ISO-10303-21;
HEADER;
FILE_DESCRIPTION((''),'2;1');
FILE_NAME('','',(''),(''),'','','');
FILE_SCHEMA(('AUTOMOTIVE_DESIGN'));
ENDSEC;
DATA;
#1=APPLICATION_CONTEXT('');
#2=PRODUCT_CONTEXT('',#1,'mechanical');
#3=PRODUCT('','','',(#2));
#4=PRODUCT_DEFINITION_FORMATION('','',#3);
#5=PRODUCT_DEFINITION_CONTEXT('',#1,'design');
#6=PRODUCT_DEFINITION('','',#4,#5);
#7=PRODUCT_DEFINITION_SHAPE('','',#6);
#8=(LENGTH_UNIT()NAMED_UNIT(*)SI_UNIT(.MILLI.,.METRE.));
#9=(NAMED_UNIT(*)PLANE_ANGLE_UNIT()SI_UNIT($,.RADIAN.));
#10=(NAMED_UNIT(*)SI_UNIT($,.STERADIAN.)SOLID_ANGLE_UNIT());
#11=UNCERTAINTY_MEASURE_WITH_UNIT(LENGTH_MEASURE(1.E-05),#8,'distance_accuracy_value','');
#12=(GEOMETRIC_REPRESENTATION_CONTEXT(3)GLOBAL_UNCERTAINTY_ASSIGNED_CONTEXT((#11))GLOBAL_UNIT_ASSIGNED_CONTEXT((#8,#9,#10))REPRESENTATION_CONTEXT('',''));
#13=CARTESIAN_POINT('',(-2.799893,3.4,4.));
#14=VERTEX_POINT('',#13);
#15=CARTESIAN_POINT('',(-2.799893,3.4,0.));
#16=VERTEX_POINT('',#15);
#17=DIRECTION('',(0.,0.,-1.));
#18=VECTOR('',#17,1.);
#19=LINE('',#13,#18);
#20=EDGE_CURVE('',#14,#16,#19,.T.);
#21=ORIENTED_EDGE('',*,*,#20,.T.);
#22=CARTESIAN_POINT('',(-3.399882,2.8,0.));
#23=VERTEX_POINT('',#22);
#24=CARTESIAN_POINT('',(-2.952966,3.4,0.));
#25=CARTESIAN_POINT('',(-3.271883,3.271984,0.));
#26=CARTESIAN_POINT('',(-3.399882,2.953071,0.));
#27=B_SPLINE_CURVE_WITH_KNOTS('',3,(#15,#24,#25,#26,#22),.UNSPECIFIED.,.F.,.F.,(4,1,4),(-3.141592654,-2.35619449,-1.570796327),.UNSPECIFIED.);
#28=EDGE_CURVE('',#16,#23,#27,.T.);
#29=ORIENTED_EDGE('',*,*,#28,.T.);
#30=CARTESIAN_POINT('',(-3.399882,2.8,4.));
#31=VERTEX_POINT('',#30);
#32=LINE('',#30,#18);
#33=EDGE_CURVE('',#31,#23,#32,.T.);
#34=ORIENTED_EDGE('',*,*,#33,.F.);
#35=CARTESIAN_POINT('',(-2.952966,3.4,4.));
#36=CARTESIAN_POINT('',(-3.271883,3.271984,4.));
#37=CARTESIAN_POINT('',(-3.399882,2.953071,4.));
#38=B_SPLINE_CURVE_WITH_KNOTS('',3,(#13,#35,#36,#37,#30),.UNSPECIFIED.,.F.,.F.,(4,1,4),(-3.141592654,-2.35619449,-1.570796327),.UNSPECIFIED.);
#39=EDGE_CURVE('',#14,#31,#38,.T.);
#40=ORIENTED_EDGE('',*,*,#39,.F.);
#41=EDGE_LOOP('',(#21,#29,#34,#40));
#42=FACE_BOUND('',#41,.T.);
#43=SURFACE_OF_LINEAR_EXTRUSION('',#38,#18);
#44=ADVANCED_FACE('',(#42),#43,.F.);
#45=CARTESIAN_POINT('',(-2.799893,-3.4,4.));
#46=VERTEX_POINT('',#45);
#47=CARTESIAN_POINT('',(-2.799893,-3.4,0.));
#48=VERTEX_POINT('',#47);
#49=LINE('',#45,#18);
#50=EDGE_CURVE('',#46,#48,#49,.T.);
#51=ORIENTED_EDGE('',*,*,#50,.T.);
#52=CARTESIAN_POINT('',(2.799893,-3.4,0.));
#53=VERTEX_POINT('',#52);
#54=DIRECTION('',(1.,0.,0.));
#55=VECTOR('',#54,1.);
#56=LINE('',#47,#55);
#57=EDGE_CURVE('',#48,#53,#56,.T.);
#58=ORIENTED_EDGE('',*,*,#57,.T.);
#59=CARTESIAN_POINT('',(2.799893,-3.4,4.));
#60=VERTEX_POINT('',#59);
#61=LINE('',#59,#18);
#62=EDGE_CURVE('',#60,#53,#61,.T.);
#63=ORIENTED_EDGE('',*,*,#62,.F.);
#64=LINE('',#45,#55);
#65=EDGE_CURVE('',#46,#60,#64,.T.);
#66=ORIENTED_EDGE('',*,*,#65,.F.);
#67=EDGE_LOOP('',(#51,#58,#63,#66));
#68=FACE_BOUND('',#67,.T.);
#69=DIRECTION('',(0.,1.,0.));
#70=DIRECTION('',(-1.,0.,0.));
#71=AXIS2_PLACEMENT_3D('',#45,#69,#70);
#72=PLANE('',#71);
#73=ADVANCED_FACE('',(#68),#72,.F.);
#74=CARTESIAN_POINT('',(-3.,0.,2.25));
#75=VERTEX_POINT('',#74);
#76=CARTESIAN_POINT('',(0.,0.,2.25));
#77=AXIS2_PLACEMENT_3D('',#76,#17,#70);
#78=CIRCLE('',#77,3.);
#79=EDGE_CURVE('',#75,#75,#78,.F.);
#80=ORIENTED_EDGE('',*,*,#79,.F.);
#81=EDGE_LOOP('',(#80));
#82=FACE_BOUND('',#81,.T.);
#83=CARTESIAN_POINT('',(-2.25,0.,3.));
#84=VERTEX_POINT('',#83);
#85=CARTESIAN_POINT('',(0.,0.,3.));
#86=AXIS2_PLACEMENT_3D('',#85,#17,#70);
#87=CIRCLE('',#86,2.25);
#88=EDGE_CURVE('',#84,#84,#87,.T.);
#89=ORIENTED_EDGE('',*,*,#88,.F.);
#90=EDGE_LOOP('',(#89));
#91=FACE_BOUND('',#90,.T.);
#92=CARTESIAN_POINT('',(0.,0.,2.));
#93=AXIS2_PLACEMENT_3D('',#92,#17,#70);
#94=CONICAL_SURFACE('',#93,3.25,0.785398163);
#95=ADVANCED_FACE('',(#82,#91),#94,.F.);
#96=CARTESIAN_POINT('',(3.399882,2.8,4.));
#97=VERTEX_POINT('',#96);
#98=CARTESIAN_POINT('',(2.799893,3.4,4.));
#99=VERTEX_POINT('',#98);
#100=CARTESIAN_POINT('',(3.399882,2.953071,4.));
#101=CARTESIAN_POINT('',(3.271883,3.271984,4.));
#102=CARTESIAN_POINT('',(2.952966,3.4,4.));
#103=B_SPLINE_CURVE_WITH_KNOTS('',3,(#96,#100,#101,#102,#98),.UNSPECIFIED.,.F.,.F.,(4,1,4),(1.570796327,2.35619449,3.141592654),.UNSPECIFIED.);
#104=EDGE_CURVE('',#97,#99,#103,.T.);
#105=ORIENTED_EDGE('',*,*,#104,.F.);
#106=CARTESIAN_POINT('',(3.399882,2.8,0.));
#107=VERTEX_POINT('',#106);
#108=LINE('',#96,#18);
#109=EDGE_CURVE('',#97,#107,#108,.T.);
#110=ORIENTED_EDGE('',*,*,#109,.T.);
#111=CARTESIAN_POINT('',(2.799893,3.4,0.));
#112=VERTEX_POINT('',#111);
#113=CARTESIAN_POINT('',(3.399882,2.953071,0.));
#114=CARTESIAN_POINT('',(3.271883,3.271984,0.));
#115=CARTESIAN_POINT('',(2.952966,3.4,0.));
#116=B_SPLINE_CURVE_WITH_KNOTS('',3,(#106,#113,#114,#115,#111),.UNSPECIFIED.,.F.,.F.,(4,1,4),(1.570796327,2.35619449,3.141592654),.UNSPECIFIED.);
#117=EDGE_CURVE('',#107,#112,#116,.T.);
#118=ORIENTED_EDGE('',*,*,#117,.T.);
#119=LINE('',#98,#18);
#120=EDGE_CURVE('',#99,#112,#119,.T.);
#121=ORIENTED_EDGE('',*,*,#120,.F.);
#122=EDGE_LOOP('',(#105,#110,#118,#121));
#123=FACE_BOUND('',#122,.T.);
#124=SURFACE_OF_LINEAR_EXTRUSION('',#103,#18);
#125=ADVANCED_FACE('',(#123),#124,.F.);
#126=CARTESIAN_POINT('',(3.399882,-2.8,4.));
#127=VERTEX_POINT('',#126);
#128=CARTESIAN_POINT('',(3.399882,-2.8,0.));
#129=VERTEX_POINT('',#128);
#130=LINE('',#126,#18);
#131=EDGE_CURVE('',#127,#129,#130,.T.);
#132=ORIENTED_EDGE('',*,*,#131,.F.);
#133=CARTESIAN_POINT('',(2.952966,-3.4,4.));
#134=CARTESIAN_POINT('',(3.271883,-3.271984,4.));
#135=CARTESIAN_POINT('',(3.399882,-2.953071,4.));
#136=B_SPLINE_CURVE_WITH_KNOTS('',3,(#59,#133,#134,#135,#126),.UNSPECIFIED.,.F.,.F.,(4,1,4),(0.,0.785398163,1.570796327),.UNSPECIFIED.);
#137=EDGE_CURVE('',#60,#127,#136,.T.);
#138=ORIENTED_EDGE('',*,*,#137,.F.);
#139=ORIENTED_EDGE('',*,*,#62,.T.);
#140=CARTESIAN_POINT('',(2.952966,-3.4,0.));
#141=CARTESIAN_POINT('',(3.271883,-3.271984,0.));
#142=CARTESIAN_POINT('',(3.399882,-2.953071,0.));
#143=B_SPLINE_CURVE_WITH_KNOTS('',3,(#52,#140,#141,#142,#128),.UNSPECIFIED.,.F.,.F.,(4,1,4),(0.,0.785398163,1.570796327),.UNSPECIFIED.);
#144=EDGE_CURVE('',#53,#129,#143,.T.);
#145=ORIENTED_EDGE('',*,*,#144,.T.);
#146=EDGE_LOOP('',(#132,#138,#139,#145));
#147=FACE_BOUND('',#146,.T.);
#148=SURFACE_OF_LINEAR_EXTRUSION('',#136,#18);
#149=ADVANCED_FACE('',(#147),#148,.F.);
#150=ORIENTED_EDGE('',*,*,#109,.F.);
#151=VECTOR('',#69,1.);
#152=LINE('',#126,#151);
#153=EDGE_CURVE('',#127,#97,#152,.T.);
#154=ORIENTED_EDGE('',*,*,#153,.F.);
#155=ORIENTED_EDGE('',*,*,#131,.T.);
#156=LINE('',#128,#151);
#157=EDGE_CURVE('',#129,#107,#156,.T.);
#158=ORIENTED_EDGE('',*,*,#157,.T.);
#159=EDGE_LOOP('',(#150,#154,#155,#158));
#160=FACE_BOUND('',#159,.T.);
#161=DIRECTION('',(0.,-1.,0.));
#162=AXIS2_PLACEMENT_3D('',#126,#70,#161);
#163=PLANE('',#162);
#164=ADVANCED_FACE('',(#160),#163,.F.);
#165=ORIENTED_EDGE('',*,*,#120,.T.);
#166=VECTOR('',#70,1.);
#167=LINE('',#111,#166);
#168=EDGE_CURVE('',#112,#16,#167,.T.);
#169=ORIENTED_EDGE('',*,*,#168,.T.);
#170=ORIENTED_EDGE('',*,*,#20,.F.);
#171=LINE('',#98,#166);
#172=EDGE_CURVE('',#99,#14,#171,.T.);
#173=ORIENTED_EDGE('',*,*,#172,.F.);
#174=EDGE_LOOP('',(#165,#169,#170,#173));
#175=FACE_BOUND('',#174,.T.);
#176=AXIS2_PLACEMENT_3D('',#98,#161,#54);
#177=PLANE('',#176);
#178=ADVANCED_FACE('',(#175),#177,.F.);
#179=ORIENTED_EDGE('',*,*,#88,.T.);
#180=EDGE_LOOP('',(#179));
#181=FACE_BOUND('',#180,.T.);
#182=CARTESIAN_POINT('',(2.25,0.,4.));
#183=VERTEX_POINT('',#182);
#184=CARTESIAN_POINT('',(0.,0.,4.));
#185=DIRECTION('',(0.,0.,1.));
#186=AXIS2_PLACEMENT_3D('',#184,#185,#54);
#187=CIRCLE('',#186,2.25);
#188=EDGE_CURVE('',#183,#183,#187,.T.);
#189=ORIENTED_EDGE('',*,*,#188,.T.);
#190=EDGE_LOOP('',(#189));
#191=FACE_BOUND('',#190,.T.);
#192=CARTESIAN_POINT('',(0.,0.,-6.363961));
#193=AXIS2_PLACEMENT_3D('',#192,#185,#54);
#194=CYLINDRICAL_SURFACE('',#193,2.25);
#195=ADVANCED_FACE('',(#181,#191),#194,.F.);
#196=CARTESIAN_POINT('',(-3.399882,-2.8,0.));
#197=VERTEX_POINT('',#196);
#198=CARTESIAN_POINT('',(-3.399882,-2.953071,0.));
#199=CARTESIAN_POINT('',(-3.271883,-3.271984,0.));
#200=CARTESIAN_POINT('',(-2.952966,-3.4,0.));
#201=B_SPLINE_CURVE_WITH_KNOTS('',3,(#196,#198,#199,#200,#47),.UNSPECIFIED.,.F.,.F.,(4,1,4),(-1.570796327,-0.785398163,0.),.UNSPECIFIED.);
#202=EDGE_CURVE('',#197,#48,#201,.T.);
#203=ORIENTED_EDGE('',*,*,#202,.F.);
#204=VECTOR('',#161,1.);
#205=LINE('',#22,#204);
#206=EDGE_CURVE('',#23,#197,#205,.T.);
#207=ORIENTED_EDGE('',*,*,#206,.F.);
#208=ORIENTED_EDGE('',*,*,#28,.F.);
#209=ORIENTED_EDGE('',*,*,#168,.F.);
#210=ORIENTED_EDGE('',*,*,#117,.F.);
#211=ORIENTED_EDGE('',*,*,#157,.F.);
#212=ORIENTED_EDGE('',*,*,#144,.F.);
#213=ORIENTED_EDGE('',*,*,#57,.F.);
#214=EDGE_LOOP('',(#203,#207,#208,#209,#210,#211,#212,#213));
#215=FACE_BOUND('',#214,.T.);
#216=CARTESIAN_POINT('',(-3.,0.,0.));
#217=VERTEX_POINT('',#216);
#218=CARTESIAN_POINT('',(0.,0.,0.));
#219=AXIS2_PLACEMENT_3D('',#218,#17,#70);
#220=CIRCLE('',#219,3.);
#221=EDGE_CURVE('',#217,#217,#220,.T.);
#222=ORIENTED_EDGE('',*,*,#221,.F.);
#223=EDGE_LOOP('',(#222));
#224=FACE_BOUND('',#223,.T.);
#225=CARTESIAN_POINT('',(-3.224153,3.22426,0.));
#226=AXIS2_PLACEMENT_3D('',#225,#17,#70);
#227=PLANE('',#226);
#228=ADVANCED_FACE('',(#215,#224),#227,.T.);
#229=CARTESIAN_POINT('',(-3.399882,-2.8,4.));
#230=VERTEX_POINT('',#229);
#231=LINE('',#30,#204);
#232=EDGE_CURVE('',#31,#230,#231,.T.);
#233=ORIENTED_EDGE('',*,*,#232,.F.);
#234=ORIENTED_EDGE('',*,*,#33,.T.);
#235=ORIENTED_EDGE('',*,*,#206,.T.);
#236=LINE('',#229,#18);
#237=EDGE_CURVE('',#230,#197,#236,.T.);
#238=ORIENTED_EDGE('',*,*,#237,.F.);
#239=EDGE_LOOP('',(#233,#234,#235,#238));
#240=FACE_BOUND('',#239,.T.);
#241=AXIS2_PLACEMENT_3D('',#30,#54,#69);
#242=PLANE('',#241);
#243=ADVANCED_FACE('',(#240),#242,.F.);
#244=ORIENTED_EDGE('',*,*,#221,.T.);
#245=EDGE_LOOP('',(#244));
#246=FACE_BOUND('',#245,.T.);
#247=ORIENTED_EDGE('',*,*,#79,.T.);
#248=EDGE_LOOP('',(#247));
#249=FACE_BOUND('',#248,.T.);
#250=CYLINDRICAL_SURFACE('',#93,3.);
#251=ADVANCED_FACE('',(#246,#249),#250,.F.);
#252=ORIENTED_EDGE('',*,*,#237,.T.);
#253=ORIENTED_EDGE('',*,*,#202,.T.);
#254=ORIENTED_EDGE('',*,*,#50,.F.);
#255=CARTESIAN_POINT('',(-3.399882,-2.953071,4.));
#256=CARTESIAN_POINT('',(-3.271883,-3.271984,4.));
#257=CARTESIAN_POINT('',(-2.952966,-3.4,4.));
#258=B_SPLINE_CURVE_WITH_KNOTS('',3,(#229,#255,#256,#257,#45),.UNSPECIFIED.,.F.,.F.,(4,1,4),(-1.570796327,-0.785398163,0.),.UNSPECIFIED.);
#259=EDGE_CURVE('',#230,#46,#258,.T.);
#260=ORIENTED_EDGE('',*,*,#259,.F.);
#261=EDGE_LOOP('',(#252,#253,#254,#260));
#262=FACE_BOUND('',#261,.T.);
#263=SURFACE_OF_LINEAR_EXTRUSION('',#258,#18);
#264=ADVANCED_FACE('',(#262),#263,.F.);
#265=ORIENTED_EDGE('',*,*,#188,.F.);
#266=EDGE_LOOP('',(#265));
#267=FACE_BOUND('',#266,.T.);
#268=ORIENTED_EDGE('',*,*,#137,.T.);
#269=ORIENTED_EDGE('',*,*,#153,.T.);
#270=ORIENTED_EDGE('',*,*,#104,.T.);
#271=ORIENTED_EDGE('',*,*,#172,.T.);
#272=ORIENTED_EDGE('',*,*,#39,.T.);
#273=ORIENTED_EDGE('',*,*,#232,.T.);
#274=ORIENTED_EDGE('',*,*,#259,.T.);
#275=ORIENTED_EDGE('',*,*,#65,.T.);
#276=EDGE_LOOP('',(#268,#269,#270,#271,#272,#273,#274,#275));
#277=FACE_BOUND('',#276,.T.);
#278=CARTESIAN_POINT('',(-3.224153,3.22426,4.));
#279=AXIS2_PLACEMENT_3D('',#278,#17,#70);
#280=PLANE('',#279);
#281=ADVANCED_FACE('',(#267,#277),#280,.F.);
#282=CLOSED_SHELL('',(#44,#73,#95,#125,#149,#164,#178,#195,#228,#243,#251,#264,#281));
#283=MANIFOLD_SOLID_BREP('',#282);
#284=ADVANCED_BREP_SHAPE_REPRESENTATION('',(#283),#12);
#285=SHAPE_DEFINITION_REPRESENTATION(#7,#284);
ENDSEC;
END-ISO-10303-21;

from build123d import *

# Parameters (mm, degrees)
BOSS_EXTRUDE1_DEPTH = 4
SKETCH2_R           = 2.25
CUT_EXTRUDE1_DEPTH  = 4
SKETCH3_R           = 3
CUT_EXTRUDE2_DEPTH  = 2
CHAMFER1_SIZE       = 1


with BuildPart() as part:
    # Sketch1 → Boss-Extrude1 (new body)
    with BuildSketch(Plane.XY):
        with BuildLine():
            Line((-3.399881961, 2.8), (-3.399881961, -2.8))
            add(Edge.make_bspline(
                [(-3.399881961, -2.8), (-3.399881961, -2.953071187), (-3.271882834, -3.271984466), (-2.952966029, -3.4), (-2.799893385, -3.4)],
                knots=[-1.570796327, -1.570796327, -1.570796327, -1.570796327, -0.785398163, 0, 0, 0, 0], degree=3))
            Line((-2.799893385, -3.4), (2.799893385, -3.4))
            add(Edge.make_bspline(
                [(2.799893385, -3.4), (2.952966029, -3.4), (3.271882834, -3.271984466), (3.399881961, -2.953071187), (3.399881961, -2.8)],
                knots=[0, 0, 0, 0, 0.785398163, 1.570796327, 1.570796327, 1.570796327, 1.570796327], degree=3))
            Line((3.399881961, -2.8), (3.399881961, 2.8))
            add(Edge.make_bspline(
                [(3.399881961, 2.8), (3.399881961, 2.953071187), (3.271882834, 3.271984466), (2.952966029, 3.4), (2.799893385, 3.4)],
                knots=[1.570796327, 1.570796327, 1.570796327, 1.570796327, 2.35619449, 3.141592654, 3.141592654, 3.141592654, 3.141592654], degree=3))
            Line((2.799893385, 3.4), (-2.799893385, 3.4))
            add(Edge.make_bspline(
                [(-2.799893385, 3.4), (-2.952966029, 3.4), (-3.271882834, 3.271984466), (-3.399881961, 2.953071187), (-3.399881961, 2.8)],
                knots=[-3.141592654, -3.141592654, -3.141592654, -3.141592654, -2.35619449, -1.570796327, -1.570796327, -1.570796327, -1.570796327], degree=3))
        make_face()
    extrude(amount=BOSS_EXTRUDE1_DEPTH)

    # Sketch2 → Cut-Extrude1 (cut)
    with BuildSketch(Plane.XY.offset(4)):
        Circle(SKETCH2_R)
    extrude(amount=-CUT_EXTRUDE1_DEPTH, mode=Mode.SUBTRACT)

    # Sketch3 → Cut-Extrude2 (cut)
    with BuildSketch(Plane(origin=(0, 0, 0), x_dir=(-1, 0, 0), z_dir=(0, 0, -1))):
        Circle(SKETCH3_R)
    extrude(amount=-CUT_EXTRUDE2_DEPTH, mode=Mode.SUBTRACT)

    # Chamfer1
    # the kernel refuses this chamfer: 1 mm, written as the material it takes off along each edge
    with BuildSketch(Plane(origin=(0, 0, 2), x_dir=(1, 0, 0), z_dir=(0, -1, 0))) as chamfer1_piece_1_section:
        Polygon((2.25, CHAMFER1_SIZE), (2.25 + CHAMFER1_SIZE, 0), (2.25, 0), align=None)
    chamfer1_piece_1 = revolve(axis=Axis((0, 0, 2), (0, 0, 1)), mode=Mode.PRIVATE)
    chamfer1_piece_1 = chamfer1_piece_1 & Plane(origin=(0, 0, 2.624934748), x_dir=(-1, 0, 0), z_dir=(0, 0, -1)) * Cylinder(3, 13, mode=Mode.PRIVATE)
    add(chamfer1_piece_1, mode=Mode.SUBTRACT)


solid = part.part
